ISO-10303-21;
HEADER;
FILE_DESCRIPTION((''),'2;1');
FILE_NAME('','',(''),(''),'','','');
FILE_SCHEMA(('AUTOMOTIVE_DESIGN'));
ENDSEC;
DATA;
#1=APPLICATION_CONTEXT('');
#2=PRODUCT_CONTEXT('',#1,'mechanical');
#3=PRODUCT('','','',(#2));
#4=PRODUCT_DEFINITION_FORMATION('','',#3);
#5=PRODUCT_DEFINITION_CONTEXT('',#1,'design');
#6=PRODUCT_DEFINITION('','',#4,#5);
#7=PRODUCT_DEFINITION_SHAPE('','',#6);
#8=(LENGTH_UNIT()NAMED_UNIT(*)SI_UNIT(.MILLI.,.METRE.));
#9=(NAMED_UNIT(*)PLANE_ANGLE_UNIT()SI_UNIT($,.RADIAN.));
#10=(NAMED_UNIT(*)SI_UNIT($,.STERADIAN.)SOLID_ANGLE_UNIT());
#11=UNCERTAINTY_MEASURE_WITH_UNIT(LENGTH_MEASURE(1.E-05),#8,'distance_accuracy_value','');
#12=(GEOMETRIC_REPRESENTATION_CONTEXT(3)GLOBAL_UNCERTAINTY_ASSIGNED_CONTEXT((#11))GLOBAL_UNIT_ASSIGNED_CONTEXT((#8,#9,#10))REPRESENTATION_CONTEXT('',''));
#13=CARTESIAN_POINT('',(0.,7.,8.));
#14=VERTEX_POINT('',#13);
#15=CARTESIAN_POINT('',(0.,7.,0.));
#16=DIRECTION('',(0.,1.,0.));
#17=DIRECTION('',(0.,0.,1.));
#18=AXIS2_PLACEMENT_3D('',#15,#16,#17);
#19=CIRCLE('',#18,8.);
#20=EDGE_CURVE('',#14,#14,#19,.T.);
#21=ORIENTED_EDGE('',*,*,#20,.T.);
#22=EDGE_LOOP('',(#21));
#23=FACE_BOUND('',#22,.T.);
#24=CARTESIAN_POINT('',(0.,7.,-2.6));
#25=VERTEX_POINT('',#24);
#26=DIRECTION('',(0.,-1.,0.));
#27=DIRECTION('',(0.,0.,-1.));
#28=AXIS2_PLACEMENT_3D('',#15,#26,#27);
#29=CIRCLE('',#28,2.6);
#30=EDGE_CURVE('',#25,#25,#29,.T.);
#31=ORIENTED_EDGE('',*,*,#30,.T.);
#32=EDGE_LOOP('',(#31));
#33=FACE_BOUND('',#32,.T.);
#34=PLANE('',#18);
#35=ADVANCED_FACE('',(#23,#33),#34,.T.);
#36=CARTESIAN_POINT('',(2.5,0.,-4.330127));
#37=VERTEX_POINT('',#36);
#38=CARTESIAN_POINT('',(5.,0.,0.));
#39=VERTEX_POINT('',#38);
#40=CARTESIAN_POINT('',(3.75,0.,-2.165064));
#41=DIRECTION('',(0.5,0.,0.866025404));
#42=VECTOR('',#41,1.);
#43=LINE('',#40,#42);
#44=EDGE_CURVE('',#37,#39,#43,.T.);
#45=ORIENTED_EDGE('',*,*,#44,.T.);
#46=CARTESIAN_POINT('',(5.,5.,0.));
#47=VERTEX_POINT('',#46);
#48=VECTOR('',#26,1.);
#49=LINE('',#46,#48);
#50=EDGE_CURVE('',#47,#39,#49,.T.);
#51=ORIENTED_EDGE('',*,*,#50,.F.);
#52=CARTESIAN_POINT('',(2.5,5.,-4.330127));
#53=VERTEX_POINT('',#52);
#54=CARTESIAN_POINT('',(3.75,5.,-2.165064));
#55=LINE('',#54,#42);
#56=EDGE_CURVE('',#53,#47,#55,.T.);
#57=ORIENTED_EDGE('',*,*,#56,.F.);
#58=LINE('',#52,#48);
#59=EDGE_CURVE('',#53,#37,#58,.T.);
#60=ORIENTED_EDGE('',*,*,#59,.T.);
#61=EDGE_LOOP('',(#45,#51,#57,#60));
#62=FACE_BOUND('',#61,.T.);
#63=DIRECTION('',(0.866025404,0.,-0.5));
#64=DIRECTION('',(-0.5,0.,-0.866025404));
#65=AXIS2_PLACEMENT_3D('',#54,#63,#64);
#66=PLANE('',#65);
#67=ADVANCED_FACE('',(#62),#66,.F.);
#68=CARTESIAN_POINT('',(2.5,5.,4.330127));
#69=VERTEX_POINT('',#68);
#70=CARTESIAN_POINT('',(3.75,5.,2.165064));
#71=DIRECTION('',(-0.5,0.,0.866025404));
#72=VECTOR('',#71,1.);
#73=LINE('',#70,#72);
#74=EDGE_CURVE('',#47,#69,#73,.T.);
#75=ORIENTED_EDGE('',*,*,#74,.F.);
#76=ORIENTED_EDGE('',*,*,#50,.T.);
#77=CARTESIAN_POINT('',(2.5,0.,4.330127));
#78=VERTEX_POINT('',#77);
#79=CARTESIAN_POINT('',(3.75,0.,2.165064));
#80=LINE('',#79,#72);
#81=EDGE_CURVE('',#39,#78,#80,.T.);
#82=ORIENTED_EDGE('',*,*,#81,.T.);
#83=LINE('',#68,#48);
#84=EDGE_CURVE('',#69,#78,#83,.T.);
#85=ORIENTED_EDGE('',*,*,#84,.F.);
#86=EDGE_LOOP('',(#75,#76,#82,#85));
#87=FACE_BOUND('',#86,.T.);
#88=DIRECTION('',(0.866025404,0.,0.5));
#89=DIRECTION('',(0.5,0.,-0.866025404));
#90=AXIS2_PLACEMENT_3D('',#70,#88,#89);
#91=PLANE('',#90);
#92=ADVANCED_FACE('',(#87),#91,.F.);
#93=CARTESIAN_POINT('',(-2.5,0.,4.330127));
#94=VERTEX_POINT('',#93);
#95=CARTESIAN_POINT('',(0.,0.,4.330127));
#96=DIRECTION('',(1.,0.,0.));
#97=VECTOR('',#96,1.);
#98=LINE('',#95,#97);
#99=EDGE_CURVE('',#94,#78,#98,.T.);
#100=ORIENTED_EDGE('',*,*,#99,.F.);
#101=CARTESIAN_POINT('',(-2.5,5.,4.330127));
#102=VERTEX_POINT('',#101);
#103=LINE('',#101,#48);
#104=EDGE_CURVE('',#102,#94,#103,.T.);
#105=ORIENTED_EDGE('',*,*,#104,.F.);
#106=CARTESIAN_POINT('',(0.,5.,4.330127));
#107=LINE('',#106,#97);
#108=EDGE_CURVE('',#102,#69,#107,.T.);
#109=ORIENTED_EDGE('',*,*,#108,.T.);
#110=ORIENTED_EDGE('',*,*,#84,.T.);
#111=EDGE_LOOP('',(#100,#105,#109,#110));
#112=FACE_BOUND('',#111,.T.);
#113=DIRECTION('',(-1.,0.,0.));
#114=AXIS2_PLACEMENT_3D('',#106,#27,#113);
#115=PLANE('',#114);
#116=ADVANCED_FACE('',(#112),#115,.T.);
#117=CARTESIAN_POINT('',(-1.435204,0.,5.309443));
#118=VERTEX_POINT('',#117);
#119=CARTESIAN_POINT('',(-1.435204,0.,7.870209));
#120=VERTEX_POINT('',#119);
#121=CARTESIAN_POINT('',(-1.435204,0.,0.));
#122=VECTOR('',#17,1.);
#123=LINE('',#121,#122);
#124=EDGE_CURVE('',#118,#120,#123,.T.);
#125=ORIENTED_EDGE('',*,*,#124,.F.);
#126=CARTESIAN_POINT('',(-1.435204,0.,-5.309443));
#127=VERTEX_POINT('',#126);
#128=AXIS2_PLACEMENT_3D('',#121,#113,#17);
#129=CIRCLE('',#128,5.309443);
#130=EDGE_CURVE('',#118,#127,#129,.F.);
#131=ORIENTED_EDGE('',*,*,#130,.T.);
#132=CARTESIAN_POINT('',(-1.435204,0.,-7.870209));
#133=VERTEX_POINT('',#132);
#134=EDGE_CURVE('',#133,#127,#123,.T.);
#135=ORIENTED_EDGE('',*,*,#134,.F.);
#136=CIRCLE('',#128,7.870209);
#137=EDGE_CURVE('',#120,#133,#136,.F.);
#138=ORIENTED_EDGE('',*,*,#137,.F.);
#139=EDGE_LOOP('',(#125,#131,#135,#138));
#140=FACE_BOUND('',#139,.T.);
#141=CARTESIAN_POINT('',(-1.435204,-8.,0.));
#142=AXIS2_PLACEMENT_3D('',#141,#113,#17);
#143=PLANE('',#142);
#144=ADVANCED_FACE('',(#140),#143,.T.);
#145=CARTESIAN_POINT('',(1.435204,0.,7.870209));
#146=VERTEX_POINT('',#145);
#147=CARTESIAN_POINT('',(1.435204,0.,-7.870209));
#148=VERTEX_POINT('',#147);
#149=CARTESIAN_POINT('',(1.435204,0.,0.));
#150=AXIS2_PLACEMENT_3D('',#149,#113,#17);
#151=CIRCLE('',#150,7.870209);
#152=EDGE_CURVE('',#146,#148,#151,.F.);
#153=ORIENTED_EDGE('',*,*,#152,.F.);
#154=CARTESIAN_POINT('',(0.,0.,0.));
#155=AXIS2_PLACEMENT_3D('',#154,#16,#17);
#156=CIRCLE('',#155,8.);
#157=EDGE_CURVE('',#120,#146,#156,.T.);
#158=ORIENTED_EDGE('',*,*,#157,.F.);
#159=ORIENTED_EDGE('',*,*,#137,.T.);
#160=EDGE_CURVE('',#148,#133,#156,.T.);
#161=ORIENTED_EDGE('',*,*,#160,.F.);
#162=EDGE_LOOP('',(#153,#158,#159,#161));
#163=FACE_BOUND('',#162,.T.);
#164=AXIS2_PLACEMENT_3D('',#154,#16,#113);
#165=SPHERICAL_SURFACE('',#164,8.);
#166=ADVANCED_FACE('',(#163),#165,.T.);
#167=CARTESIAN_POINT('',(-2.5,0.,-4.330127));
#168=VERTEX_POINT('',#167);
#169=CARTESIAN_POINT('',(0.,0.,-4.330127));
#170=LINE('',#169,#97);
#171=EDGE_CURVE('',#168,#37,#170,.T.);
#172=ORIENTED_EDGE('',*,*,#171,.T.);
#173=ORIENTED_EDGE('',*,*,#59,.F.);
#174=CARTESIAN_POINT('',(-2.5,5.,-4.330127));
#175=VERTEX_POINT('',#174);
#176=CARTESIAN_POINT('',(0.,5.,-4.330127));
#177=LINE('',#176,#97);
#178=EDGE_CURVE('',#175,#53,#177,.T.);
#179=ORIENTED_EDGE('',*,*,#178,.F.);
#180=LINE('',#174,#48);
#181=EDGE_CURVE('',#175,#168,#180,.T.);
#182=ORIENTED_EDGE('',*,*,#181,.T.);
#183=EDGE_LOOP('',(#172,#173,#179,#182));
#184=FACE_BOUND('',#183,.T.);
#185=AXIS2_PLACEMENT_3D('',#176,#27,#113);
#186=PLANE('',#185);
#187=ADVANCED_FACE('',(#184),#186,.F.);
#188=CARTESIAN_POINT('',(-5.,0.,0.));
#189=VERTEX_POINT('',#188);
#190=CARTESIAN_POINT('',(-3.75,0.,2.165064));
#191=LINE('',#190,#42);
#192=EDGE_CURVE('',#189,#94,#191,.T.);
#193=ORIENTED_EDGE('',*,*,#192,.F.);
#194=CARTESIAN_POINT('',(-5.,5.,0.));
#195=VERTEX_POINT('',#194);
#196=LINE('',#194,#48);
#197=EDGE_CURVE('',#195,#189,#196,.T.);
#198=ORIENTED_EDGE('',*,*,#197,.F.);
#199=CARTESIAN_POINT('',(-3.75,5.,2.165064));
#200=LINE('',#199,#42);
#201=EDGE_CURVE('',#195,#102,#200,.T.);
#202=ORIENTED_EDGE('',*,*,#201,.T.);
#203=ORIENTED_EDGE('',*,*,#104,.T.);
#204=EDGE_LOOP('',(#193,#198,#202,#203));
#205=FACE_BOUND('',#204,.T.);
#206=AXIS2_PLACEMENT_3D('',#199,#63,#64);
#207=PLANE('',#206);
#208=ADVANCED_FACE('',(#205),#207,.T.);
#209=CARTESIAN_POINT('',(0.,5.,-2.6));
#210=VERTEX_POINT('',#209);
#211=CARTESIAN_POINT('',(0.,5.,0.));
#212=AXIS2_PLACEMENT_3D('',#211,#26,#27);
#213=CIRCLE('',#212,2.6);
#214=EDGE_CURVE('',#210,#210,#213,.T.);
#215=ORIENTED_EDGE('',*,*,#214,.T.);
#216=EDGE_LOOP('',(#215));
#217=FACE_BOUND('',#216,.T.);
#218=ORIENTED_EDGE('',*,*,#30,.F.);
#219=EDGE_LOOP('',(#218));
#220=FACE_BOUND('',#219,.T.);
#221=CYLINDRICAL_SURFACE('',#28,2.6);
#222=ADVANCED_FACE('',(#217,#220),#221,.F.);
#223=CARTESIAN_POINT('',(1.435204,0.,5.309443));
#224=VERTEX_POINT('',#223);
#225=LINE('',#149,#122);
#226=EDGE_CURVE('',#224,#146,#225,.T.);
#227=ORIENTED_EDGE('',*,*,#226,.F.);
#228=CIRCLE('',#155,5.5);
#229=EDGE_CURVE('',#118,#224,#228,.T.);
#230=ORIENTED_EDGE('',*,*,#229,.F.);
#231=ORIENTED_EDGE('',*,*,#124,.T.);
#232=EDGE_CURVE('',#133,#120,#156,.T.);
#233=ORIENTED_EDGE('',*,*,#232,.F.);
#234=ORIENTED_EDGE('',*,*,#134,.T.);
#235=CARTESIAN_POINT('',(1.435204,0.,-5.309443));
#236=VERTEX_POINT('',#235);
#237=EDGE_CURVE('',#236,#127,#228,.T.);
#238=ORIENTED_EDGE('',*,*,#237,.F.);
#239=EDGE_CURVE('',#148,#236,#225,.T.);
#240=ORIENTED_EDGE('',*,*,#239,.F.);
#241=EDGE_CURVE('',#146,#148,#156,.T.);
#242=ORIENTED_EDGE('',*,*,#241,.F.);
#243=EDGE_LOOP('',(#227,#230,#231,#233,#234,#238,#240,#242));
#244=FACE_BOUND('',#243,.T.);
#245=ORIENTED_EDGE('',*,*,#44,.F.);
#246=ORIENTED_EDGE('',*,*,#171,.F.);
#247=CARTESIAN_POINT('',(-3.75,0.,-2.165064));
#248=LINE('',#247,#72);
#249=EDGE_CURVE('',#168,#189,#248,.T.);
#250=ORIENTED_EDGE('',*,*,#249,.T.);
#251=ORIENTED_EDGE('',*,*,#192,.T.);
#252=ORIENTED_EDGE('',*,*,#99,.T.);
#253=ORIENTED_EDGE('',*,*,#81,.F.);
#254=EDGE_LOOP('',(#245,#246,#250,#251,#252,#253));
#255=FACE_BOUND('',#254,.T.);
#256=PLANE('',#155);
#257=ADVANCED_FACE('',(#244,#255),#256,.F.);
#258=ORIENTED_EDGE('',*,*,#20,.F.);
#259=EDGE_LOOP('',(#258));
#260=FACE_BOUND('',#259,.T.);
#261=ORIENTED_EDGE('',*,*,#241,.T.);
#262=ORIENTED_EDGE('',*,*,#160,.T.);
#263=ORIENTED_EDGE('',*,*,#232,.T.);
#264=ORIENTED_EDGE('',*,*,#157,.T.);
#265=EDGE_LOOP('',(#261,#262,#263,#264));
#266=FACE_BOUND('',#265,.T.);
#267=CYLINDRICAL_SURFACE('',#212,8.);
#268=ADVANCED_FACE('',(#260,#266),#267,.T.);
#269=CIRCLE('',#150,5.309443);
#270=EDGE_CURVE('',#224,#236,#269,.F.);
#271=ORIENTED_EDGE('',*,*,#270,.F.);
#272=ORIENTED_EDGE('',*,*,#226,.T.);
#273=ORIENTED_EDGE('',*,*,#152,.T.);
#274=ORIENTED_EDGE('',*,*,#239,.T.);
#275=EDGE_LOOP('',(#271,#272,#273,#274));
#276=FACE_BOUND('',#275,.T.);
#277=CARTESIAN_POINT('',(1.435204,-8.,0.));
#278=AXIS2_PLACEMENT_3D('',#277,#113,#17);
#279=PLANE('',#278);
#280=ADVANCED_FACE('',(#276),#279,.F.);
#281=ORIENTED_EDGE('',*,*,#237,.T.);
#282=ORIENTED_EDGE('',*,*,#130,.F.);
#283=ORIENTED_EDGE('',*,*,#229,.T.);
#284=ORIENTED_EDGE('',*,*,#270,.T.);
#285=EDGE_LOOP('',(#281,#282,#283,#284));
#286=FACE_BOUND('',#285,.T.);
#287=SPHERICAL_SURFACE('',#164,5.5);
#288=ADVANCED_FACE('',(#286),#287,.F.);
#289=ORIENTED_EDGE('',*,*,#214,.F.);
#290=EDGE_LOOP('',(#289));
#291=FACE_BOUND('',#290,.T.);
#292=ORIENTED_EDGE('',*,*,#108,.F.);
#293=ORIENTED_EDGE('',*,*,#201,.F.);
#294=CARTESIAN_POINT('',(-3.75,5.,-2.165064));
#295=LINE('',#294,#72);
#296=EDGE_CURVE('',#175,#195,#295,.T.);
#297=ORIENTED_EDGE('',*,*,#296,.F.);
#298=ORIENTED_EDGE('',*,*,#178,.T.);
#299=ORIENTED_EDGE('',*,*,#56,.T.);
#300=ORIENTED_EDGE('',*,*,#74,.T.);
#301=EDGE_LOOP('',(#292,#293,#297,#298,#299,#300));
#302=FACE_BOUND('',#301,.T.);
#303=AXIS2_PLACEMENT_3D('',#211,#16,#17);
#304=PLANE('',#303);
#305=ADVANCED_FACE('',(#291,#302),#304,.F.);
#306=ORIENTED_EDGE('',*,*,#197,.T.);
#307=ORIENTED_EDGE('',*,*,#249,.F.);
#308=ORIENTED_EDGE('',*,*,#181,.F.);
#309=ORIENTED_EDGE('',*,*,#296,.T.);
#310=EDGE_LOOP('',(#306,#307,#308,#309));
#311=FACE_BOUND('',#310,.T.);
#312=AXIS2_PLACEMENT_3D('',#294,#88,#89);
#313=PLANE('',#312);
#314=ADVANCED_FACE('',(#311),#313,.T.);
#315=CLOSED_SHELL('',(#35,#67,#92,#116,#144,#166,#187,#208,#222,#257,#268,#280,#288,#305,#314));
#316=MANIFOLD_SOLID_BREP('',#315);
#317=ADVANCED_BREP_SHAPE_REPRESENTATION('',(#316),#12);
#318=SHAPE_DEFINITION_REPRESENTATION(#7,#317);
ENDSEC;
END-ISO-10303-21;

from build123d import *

# Parameters (mm, degrees)
SKETCH1_R           = 8
BOSS_EXTRUDE1_DEPTH = 5
SKETCH2_R           = 8
BOSS_EXTRUDE2_DEPTH = 2
SKETCH3_R           = 2.6
CUT_EXTRUDE1_DEPTH  = 2
SKETCH6_W           = 7.287885745
SKETCH6_H           = 18.210888192
SKETCH6_W_2         = 7.49722984
CUT_EXTRUDE2_DEPTH  = 8


with BuildPart() as part:
    # Sketch1 → Boss-Extrude1 (new body)
    with BuildSketch(Plane(origin=(0, 0, 0), x_dir=(1, 0, 0), z_dir=(0, 1, 0))):
        Circle(SKETCH1_R)
        Polygon((-2.5, 4.330127019), (2.5, 4.330127019), (5, 0), (2.5, -4.330127019), (-2.5, -4.330127019), (-5, 0), align=None, mode=Mode.SUBTRACT)
    extrude(amount=BOSS_EXTRUDE1_DEPTH)

    # Sketch2 → Boss-Extrude2 (add)
    with BuildSketch(Plane(origin=(0, 5, 0), x_dir=(1, 0, 0), z_dir=(0, 1, 0))):
        Circle(SKETCH2_R)
    extrude(amount=BOSS_EXTRUDE2_DEPTH)

    # Sketch3 → Cut-Extrude1 (cut)
    with BuildSketch(Plane.XZ.offset(-5)):
        Circle(SKETCH3_R)
    extrude(amount=-CUT_EXTRUDE1_DEPTH, mode=Mode.SUBTRACT)

    # Sketch5 → Revolve1 (revolve)
    with BuildSketch(Plane.XY):
        with BuildLine():
            Line((-8, 0), (-5.5, 0))
            ThreePointArc((-5.5, 0), (-3.889087297, -3.889087297), (0, -5.5))
            Line((0, -5.5), (0, -8))
            ThreePointArc((0, -8), (-5.656854249, -5.656854249), (-8, 0))
        make_face()
    revolve(axis=Axis((0, 5, 0), (0, -1, 0)))

    # Sketch6 → Cut-Extrude2 (cut)
    with BuildSketch(Plane(origin=(0, 0, 0), x_dir=(-1, 0, 0), z_dir=(0, -1, 0))):
        with Locations((5.079146944, 0)):
            Rectangle(SKETCH6_W, SKETCH6_H)
        with Locations((-5.183818992, 0)):
            Rectangle(SKETCH6_W_2, SKETCH6_H)
    extrude(amount=CUT_EXTRUDE2_DEPTH, mode=Mode.SUBTRACT)


solid = part.part
